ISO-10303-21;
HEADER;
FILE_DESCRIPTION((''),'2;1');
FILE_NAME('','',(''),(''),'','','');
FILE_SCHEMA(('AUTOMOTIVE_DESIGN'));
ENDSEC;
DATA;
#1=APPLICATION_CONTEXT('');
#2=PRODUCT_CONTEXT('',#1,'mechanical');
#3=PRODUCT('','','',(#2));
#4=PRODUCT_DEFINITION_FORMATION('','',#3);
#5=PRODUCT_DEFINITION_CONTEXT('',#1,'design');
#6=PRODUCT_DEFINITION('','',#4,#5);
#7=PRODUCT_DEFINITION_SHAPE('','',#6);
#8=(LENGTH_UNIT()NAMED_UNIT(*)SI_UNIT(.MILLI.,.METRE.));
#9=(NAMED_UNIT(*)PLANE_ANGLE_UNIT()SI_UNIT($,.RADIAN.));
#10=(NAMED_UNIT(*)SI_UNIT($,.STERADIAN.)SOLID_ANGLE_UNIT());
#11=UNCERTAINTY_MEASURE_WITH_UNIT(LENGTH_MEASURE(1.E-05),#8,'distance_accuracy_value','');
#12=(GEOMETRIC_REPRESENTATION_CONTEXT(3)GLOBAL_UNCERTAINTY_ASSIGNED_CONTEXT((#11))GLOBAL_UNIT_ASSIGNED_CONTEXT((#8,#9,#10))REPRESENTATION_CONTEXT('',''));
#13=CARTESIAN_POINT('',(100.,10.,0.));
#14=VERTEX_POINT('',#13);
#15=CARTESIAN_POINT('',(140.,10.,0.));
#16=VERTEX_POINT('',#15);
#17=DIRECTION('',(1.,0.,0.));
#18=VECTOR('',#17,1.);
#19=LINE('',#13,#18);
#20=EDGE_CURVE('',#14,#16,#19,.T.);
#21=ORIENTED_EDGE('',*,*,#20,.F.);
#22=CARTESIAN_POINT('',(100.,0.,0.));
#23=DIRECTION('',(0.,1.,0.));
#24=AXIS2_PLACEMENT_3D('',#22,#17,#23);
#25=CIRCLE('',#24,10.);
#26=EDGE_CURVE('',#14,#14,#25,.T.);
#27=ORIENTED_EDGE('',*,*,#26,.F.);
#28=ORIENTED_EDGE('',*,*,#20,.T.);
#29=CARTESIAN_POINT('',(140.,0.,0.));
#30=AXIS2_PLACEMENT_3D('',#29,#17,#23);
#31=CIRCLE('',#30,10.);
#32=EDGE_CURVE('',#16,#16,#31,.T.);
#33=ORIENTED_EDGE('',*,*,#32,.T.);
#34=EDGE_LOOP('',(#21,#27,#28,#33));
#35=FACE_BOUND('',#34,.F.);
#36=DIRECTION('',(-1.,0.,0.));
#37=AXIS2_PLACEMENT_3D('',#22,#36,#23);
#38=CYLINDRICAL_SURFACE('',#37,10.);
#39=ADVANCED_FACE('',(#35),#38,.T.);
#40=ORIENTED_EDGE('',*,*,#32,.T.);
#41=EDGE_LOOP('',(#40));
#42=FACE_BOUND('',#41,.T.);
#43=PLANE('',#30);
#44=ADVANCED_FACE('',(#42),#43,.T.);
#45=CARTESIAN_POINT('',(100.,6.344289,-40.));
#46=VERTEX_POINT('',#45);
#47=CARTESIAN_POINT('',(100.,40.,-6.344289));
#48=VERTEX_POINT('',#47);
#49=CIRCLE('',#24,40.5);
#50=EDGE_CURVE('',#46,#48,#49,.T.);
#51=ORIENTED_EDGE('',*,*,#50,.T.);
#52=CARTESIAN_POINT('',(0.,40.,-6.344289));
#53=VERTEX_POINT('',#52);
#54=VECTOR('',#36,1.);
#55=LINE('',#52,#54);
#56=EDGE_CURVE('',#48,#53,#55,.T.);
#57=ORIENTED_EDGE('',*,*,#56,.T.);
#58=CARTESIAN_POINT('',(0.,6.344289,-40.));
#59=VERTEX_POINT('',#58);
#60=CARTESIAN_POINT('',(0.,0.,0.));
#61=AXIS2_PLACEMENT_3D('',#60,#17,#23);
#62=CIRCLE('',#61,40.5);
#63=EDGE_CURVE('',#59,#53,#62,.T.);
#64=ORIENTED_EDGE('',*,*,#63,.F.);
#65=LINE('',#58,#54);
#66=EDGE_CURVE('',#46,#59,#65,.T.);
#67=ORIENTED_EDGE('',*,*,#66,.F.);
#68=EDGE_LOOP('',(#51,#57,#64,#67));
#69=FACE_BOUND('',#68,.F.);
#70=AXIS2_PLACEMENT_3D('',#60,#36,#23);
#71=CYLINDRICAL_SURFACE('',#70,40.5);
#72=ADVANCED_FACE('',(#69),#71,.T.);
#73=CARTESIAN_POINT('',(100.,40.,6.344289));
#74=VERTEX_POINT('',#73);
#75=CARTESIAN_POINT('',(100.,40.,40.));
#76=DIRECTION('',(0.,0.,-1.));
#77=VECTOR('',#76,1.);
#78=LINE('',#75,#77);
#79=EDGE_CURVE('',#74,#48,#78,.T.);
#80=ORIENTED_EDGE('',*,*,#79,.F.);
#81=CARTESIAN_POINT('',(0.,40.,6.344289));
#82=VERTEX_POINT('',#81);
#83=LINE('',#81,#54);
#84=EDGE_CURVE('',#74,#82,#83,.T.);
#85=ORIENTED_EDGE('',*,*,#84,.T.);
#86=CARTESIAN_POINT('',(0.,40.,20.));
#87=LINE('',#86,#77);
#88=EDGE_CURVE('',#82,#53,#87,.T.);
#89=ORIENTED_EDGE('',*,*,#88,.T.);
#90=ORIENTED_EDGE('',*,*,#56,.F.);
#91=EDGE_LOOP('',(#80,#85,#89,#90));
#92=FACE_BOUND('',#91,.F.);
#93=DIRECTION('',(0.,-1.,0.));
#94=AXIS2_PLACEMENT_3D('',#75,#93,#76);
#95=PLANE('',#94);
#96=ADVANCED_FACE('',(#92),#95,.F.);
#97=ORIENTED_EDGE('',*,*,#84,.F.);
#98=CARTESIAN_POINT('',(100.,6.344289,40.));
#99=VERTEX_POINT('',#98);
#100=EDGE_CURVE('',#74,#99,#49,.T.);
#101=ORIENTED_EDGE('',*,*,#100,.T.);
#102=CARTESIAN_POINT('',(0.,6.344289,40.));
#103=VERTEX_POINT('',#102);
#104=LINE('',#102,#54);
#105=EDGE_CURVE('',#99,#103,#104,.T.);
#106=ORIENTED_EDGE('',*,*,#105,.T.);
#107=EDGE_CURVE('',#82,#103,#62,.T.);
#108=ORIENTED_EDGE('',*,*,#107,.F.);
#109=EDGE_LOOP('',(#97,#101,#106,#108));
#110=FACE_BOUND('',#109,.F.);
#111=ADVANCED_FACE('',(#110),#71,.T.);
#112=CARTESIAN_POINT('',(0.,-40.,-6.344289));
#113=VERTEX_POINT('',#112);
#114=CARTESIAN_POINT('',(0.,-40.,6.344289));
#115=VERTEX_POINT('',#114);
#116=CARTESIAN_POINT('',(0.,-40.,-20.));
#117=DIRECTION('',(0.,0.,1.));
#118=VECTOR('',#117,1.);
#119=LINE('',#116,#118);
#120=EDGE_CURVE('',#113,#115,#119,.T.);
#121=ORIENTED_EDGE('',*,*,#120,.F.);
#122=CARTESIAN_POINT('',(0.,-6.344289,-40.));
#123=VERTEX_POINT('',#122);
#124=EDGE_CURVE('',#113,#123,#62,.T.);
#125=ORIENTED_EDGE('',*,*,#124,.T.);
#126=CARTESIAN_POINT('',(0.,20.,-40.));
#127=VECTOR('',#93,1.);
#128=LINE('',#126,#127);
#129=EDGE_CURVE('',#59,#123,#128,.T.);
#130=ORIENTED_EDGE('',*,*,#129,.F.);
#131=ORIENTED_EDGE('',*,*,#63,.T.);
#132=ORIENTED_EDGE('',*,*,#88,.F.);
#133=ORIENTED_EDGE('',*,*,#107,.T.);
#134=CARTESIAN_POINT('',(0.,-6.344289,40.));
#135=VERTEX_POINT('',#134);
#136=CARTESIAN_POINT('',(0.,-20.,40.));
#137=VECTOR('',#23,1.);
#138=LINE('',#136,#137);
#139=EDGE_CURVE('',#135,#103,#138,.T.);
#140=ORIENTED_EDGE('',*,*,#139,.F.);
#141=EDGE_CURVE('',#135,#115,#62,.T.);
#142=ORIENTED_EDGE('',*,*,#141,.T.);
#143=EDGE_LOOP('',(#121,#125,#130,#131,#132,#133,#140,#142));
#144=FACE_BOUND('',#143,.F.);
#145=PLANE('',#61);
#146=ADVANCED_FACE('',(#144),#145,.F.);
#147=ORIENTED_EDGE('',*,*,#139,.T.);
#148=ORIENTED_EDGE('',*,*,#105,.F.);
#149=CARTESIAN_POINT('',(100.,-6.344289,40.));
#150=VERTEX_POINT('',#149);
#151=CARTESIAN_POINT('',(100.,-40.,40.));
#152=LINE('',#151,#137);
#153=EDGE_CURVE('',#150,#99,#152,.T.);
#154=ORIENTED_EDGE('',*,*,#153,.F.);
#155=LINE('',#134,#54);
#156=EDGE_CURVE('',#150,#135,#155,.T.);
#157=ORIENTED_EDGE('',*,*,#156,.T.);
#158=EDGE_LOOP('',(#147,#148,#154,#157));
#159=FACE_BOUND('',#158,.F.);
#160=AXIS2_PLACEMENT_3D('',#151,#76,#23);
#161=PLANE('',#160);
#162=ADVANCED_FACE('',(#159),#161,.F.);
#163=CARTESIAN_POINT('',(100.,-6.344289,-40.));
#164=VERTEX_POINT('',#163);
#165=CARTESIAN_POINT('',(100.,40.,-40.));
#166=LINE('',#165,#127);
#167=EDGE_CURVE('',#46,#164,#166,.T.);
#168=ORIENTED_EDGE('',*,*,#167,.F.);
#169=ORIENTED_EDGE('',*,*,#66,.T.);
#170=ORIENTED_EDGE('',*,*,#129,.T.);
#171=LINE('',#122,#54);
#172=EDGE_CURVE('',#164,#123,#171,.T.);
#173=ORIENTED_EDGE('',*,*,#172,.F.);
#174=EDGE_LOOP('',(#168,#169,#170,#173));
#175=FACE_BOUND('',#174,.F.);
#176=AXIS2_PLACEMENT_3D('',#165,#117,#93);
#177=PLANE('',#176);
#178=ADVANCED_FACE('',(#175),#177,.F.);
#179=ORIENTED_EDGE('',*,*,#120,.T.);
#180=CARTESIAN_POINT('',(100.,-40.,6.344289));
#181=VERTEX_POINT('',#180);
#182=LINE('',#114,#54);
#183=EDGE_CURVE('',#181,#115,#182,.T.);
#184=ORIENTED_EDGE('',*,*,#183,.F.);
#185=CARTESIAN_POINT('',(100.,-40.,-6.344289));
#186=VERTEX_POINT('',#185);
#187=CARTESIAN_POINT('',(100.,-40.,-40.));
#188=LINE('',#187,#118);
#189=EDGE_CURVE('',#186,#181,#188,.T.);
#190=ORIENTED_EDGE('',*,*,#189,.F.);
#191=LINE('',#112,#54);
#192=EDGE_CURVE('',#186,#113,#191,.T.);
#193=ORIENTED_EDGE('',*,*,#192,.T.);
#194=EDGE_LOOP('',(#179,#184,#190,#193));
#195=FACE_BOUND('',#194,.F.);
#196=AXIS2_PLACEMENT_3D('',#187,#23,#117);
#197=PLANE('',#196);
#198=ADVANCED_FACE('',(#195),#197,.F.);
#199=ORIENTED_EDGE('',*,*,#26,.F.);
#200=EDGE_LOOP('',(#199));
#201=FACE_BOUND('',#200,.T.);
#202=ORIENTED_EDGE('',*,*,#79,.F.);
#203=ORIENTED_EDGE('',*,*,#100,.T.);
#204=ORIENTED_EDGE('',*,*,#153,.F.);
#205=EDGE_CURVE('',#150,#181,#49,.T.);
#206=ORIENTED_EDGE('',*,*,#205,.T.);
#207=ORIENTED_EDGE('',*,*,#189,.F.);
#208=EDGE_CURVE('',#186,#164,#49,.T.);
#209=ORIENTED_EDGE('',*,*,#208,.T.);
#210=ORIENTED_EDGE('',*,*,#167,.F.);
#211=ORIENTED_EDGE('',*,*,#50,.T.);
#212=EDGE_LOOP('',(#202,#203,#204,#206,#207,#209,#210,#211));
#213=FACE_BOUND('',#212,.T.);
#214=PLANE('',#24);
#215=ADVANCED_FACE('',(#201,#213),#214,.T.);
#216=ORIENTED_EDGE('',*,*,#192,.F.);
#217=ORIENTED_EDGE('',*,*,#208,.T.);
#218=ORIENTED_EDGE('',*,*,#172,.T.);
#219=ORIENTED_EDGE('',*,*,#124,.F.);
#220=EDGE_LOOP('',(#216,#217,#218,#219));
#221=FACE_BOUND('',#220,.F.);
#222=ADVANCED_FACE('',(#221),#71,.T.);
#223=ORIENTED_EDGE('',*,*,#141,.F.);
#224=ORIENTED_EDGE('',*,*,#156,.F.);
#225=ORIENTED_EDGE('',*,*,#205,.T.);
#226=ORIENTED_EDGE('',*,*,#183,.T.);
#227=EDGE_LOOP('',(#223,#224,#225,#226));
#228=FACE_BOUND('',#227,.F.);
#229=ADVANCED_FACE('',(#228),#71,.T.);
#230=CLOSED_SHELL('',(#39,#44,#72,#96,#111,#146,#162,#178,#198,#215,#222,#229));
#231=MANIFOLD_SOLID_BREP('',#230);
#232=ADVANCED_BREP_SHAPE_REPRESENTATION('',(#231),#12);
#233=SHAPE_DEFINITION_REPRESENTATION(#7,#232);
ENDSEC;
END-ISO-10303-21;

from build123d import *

# Parameters (mm, degrees)
F0_R     = 40.5
F1_DEPTH = 100
F2_W     = 90
F2_H     = 90
F3_DEPTH = 100.001
F4_R     = 10
F5_DEPTH = 40


with BuildPart() as f1:
    # F0 (on Right) → F1 (new body)
    with BuildSketch(Plane.YZ):
        Circle(F0_R)
    extrude(amount=F1_DEPTH)

    # F2 (on face) → F3 (cut, through all)
    with BuildSketch(Plane.YZ.offset(100)):
        Rectangle(F2_W, F2_H)
        with BuildLine():
            Line((40, -6.3442887702), (40, -40))
            Line((40, -40), (6.3442887702, -40))
            ThreePointArc((6.3442887702, -40), (0, -40.5), (-6.3442887702, -40))
            Line((-6.3442887702, -40), (-40, -40))
            Line((-40, -40), (-40, -6.3442887702))
            ThreePointArc((-40, -6.3442887702), (-40.5, 0), (-40, 6.3442887702))
            Line((-40, 6.3442887702), (-40, 40))
            Line((-40, 40), (-6.3442887702, 40))
            ThreePointArc((-6.3442887702, 40), (0, 40.5), (6.3442887702, 40))
            Line((6.3442887702, 40), (40, 40))
            Line((40, 40), (40, 6.3442887702))
            ThreePointArc((40, 6.3442887702), (40.3748065011, 3.1819805153), (40.5, 0))
            ThreePointArc((40.5, 0), (40.3748065011, -3.1819805153), (40, -6.3442887702))
        make_face(mode=Mode.SUBTRACT)
        with BuildLine():
            ThreePointArc((-6.3442887702, -40), (0, -40.5), (6.3442887702, -40))
            Line((6.3442887702, -40), (-6.3442887702, -40))
        make_face()
        with BuildLine():
            Line((40, 6.3442887702), (40, -6.3442887702))
            ThreePointArc((40, -6.3442887702), (40.3748065011, -3.1819805153), (40.5, 0))
            ThreePointArc((40.5, 0), (40.3748065011, 3.1819805153), (40, 6.3442887702))
        make_face()
        with BuildLine():
            ThreePointArc((-40, 6.3442887702), (-40.5, 0), (-40, -6.3442887702))
            Line((-40, -6.3442887702), (-40, 6.3442887702))
        make_face()
        with BuildLine():
            Line((-6.3442887702, 40), (6.3442887702, 40))
            ThreePointArc((6.3442887702, 40), (0, 40.5), (-6.3442887702, 40))
        make_face()
    extrude(amount=-F3_DEPTH, mode=Mode.SUBTRACT)

    # F4 (on face) → F5 (join)
    with BuildSketch(Plane.YZ.offset(100)):
        Circle(F4_R)
    extrude(amount=F5_DEPTH)


solid = f1.part
